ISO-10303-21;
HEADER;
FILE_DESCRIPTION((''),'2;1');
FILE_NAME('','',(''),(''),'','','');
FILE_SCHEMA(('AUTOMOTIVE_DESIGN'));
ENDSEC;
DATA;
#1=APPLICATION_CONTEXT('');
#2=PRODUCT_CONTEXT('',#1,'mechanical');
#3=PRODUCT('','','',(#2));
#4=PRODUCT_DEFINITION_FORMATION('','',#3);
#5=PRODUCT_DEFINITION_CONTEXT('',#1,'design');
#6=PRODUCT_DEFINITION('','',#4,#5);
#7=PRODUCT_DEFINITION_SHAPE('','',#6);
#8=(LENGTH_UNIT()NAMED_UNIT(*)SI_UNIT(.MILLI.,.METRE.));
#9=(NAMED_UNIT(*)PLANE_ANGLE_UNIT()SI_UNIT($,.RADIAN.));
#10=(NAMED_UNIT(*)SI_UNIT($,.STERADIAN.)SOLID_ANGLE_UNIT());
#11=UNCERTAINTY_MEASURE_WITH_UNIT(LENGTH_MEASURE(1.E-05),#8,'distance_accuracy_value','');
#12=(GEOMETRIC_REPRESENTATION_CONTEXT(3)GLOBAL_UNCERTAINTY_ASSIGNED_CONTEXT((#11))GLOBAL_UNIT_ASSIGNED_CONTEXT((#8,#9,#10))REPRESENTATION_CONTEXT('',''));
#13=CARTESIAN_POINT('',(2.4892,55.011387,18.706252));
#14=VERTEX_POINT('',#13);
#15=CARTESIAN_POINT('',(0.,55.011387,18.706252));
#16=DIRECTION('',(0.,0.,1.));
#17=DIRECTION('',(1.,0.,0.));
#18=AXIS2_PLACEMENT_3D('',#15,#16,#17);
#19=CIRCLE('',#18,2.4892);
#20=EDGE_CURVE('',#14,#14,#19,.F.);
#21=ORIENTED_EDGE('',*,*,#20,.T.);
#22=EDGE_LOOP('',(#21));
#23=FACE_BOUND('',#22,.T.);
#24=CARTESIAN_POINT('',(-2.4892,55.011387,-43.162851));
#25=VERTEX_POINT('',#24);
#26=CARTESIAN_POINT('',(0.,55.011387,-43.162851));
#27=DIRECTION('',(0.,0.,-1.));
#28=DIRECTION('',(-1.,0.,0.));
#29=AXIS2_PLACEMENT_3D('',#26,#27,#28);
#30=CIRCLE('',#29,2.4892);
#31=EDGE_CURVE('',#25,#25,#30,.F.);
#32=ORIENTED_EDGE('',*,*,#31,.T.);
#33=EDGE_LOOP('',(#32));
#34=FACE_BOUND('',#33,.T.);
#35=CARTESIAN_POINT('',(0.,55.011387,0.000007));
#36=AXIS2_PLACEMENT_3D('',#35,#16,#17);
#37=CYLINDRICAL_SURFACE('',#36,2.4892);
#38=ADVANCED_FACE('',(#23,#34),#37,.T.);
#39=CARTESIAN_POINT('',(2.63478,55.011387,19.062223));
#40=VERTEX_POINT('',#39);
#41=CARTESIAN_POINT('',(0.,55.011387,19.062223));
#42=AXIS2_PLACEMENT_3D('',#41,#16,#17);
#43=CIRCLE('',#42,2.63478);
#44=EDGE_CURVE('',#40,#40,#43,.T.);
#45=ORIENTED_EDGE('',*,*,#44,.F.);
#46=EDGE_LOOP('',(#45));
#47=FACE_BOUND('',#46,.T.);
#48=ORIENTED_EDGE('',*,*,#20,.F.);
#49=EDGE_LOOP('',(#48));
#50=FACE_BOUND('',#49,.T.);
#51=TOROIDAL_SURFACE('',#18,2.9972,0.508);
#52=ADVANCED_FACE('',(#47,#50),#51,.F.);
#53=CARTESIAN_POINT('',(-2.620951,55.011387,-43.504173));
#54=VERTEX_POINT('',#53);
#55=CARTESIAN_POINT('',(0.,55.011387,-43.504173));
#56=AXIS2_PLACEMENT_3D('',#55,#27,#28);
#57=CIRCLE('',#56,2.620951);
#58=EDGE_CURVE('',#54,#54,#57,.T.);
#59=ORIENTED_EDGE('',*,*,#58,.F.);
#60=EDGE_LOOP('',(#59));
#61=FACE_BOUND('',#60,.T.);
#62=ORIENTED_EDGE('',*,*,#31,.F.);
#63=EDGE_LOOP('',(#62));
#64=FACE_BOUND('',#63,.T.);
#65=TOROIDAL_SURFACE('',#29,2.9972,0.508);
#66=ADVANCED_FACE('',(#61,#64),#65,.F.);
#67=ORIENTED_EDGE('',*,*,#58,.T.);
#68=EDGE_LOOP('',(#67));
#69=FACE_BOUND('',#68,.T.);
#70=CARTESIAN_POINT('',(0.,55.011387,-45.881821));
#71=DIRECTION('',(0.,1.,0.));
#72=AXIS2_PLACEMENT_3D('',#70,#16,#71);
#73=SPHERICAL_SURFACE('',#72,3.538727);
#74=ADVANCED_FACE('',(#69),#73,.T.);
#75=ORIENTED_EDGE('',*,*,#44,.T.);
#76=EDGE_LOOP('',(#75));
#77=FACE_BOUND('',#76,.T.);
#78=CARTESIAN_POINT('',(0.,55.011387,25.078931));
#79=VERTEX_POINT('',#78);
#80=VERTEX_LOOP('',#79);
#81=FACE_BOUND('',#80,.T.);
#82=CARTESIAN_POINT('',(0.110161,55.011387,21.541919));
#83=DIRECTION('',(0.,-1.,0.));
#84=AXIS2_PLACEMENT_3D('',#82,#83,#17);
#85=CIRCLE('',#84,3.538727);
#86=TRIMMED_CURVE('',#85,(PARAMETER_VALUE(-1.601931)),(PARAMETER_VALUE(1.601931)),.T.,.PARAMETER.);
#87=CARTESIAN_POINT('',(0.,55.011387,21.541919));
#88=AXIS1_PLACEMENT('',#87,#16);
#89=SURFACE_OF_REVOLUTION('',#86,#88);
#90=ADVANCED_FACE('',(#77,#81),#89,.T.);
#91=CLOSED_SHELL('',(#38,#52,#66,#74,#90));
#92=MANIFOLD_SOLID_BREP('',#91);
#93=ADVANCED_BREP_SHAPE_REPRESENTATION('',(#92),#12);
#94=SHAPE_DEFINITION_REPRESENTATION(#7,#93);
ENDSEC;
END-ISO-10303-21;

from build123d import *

# Parameters (mm, degrees)
SKETCH1_R              = 4.699
BOSS_EXTRUDE1_DEPTH    = 44.45
CUT_SWEEP1_PITCH       = 1.27
CUT_SWEEP1_HEIGHT      = 114.3
CUT_SWEEP1_RADIUS      = 4.699
CUT_SWEEP1_START_ANGLE = -90
SKETCH4_W              = 4.69845619
SKETCH4_H              = 16.911386709
SKETCH5_W              = 0.723886717
SKETCH5_H              = 17.397939395
SKETCH6_R              = 2.794
CUT_EXTRUDE1_DEPTH     = 6.35
CHAMFER1_SIZE          = 0.508
CHAMFER2_SIZE          = 0.79375
CHAMFER2_SIZE2         = 0.567023999
CHAMFER2_EDGE_2_SIZE   = 0.79375
CHAMFER2_EDGE_2_SIZE2  = 0.567023999
FILLET1_R              = 0.762
CHAMFER3_SIZE          = 0.3048
FILLET3_R              = 0.508


with BuildPart() as part:
    # Sketch1 → Boss-Extrude1 (new, symmetric)
    with BuildSketch(Plane(origin=(0, 0, 0), x_dir=(1, 0, 0), z_dir=(0, 1, 0))):
        with Locations(Location((0, 0, 0), (0, 0, 270))):
            Circle(SKETCH1_R)
    extrude(amount=BOSS_EXTRUDE1_DEPTH, both=True)

    # Cut-Sweep1: sweep along a helix
    with BuildLine() as cut_sweep1_path:
        add(Helix(CUT_SWEEP1_PITCH, CUT_SWEEP1_HEIGHT, CUT_SWEEP1_RADIUS, center=(0, 44.45, 0), direction=(0, -1, 0), mode=Mode.PRIVATE).rotate(Axis((0, 44.45, 0), (0, -1, 0)), CUT_SWEEP1_START_ANGLE))
    # Sketch3 → Cut-Sweep1 (sweep, cut)
    with BuildSketch(Plane.XY):
        Polygon((-3.99161, 44.606186444), (-3.99161, 44.288686444), (-4.698612835, 43.880498167), (-4.698612835, 45.014374721), align=None)
    sweep(path=cut_sweep1_path.line, is_frenet=True, mode=Mode.SUBTRACT)

    # Sketch4 → Revolve1 (revolve)
    with BuildSketch(Plane.XY):
        with Locations((-2.349228095, 52.905693355)):
            Rectangle(SKETCH4_W, SKETCH4_H)
    revolve(axis=Axis((0, 44.45, 0), (0, 1, 0)))

    # Sketch5 → Cut-Revolve1 (revolve, cut)
    with BuildSketch(Plane.XY):
        with Locations((-5.02318101, 53.148969698)):
            Rectangle(SKETCH5_W, SKETCH5_H)
    revolve(axis=Axis((0, 62.766926139, 0), (0, -1, 0)), mode=Mode.SUBTRACT)

    # Sketch6 → Cut-Extrude1 (cut, symmetric)
    with BuildSketch(Plane.XY):
        with Locations((0, 55.011386709)):
            Circle(SKETCH6_R)
    extrude(amount=CUT_EXTRUDE1_DEPTH, both=True, mode=Mode.SUBTRACT)

    # Chamfer1
    chamfer1_edges = [part.edges().sort_by_distance(p)[0] for p in [
        (4.661237651, 61.361386709, 0),
    ]]
    chamfer(chamfer1_edges, length=CHAMFER1_SIZE)

    # Chamfer2
    chamfer2_edges = [part.edges().sort_by_distance(p)[0] for p in [
        (-2.794, 55.011386706, -3.731045488),
    ]]
    chamfer2_side = [part.faces().sort_by_distance(p)[0] for p in [
        (4.661237651, 52.651693354, 0),
    ]]
    chamfer(chamfer2_edges, length=CHAMFER2_SIZE, length2=CHAMFER2_SIZE2, reference=chamfer2_side[0])

    # Chamfer2 edge 2
    chamfer2_edge_2_edges = [part.edges().sort_by_distance(p)[0] for p in [
        (-2.794, 55.011386706, 3.731045488),
    ]]
    chamfer2_edge_2_side = [part.faces().sort_by_distance(p)[0] for p in [
        (4.661237651, 52.651693354, 0),
    ]]
    chamfer(chamfer2_edge_2_edges, length=CHAMFER2_EDGE_2_SIZE, length2=CHAMFER2_EDGE_2_SIZE2, reference=chamfer2_edge_2_side[0])

    # Sketch7 → Revolve2 (revolve)
    with BuildSketch(Plane.XY):
        with BuildLine():
            Line((-3.98526, -44.45), (0, -44.45))
            Line((0, -44.45), (0, -48.645010112))
            Line((0, -48.645010112), (0, -53.407510112))
            ThreePointArc((0, -53.407510112), (-4.189252508, -50.910306929), (-3.98526, -46.0375))
            Line((-3.98526, -46.0375), (-3.98526, -44.45))
        make_face()
    revolve(axis=Axis((0, -47.823804308, 0), (0, -1, 0)))

    # Sketch8 → Cut-Revolve2 (revolve, cut)
    with BuildSketch(Plane.XY):
        Polygon((3.98526, -46.0375), (3.98526, -44.45), (5.088678737, -43.346581263), (5.088678737, -46.0375), align=None)
    revolve(axis=Axis((0, -56.16584847, 0), (0, 1, 0)), mode=Mode.SUBTRACT)


with BuildPart() as body_2:
    # Sketch9 → Revolve3 (revolve)
    with BuildSketch(Plane.XY):
        with BuildLine():
            Line((4.769366022, -47.907837304), (5.378396166, -47.907837304))
            ThreePointArc((5.378396166, -47.907837304), (5.424274511, -47.985297574), (5.470454774, -48.062578228))
            ThreePointArc((5.470454774, -48.062578228), (6.014262065, -49.72815682), (5.779486953, -51.464462974))
            ThreePointArc((5.779486953, -51.464462974), (6.076106552, -53.860794812), (8.21501488, -54.981268207))
            Line((8.21501488, -54.981268207), (8.855493066, -54.981268207))
            Line((8.855493066, -54.981268207), (8.855493066, -56.22448981))
            Line((8.855493066, -56.22448981), (0, -56.22448981))
            Line((0, -56.22448981), (0, -53.471010112))
            ThreePointArc((0, -53.471010112), (3.663868991, -51.786083179), (4.769366022, -47.907837304))
        make_face()
    revolve(axis=Axis((0, -48.645010112, 0), (0, -1, 0)))

    # Fillet1
    fillet1_edges = [body_2.edges().sort_by_distance(p)[0] for p in [
        (-5.378396166, -47.907837304, 0),
    ]]
    fillet(fillet1_edges, radius=FILLET1_R)

    # Chamfer3
    chamfer3_edges = [body_2.edges().sort_by_distance(p)[0] for p in [
        (-8.855493066, -54.981268207, 0),
    ]]
    chamfer(chamfer3_edges, length=CHAMFER3_SIZE)


with BuildPart() as body_3:
    # Sketch10 → Revolve4 (revolve)
    with BuildSketch(Plane(origin=(0, 0, 0), x_dir=(0, 0, -1), z_dir=(1, 0, 0)), mode=Mode.PRIVATE) as revolve4_sk:
        with BuildLine():
            Line((-25.078931212, 55.011386709), (49.420548196, 55.011386709))
            ThreePointArc((49.420548196, 55.011386709), (47.227520009, 58.284257823), (43.366572257, 57.500586709))
            Line((43.366572257, 57.500586709), (-18.922230923, 57.500586709))
            ThreePointArc((-18.922230923, 57.500586709), (-22.868342697, 58.402277998), (-25.078931212, 55.011386709))
        make_face()
    revolve(revolve4_sk.sketch.rotate(Axis((0, 55.011386709, 6.574e-06), (0, 0, -1)), 90), axis=Axis((0, 55.011386709, 6.574e-06), (0, 0, -1)))

    # Fillet3
    fillet3_edges = [body_3.edges().sort_by_distance(p)[0] for p in [
        (-2.4892, 55.011386709, 18.922230923),
        (-2.4892, 55.011386709, -43.366572257),
    ]]
    fillet(fillet3_edges, radius=FILLET3_R)


solid = body_3.part
